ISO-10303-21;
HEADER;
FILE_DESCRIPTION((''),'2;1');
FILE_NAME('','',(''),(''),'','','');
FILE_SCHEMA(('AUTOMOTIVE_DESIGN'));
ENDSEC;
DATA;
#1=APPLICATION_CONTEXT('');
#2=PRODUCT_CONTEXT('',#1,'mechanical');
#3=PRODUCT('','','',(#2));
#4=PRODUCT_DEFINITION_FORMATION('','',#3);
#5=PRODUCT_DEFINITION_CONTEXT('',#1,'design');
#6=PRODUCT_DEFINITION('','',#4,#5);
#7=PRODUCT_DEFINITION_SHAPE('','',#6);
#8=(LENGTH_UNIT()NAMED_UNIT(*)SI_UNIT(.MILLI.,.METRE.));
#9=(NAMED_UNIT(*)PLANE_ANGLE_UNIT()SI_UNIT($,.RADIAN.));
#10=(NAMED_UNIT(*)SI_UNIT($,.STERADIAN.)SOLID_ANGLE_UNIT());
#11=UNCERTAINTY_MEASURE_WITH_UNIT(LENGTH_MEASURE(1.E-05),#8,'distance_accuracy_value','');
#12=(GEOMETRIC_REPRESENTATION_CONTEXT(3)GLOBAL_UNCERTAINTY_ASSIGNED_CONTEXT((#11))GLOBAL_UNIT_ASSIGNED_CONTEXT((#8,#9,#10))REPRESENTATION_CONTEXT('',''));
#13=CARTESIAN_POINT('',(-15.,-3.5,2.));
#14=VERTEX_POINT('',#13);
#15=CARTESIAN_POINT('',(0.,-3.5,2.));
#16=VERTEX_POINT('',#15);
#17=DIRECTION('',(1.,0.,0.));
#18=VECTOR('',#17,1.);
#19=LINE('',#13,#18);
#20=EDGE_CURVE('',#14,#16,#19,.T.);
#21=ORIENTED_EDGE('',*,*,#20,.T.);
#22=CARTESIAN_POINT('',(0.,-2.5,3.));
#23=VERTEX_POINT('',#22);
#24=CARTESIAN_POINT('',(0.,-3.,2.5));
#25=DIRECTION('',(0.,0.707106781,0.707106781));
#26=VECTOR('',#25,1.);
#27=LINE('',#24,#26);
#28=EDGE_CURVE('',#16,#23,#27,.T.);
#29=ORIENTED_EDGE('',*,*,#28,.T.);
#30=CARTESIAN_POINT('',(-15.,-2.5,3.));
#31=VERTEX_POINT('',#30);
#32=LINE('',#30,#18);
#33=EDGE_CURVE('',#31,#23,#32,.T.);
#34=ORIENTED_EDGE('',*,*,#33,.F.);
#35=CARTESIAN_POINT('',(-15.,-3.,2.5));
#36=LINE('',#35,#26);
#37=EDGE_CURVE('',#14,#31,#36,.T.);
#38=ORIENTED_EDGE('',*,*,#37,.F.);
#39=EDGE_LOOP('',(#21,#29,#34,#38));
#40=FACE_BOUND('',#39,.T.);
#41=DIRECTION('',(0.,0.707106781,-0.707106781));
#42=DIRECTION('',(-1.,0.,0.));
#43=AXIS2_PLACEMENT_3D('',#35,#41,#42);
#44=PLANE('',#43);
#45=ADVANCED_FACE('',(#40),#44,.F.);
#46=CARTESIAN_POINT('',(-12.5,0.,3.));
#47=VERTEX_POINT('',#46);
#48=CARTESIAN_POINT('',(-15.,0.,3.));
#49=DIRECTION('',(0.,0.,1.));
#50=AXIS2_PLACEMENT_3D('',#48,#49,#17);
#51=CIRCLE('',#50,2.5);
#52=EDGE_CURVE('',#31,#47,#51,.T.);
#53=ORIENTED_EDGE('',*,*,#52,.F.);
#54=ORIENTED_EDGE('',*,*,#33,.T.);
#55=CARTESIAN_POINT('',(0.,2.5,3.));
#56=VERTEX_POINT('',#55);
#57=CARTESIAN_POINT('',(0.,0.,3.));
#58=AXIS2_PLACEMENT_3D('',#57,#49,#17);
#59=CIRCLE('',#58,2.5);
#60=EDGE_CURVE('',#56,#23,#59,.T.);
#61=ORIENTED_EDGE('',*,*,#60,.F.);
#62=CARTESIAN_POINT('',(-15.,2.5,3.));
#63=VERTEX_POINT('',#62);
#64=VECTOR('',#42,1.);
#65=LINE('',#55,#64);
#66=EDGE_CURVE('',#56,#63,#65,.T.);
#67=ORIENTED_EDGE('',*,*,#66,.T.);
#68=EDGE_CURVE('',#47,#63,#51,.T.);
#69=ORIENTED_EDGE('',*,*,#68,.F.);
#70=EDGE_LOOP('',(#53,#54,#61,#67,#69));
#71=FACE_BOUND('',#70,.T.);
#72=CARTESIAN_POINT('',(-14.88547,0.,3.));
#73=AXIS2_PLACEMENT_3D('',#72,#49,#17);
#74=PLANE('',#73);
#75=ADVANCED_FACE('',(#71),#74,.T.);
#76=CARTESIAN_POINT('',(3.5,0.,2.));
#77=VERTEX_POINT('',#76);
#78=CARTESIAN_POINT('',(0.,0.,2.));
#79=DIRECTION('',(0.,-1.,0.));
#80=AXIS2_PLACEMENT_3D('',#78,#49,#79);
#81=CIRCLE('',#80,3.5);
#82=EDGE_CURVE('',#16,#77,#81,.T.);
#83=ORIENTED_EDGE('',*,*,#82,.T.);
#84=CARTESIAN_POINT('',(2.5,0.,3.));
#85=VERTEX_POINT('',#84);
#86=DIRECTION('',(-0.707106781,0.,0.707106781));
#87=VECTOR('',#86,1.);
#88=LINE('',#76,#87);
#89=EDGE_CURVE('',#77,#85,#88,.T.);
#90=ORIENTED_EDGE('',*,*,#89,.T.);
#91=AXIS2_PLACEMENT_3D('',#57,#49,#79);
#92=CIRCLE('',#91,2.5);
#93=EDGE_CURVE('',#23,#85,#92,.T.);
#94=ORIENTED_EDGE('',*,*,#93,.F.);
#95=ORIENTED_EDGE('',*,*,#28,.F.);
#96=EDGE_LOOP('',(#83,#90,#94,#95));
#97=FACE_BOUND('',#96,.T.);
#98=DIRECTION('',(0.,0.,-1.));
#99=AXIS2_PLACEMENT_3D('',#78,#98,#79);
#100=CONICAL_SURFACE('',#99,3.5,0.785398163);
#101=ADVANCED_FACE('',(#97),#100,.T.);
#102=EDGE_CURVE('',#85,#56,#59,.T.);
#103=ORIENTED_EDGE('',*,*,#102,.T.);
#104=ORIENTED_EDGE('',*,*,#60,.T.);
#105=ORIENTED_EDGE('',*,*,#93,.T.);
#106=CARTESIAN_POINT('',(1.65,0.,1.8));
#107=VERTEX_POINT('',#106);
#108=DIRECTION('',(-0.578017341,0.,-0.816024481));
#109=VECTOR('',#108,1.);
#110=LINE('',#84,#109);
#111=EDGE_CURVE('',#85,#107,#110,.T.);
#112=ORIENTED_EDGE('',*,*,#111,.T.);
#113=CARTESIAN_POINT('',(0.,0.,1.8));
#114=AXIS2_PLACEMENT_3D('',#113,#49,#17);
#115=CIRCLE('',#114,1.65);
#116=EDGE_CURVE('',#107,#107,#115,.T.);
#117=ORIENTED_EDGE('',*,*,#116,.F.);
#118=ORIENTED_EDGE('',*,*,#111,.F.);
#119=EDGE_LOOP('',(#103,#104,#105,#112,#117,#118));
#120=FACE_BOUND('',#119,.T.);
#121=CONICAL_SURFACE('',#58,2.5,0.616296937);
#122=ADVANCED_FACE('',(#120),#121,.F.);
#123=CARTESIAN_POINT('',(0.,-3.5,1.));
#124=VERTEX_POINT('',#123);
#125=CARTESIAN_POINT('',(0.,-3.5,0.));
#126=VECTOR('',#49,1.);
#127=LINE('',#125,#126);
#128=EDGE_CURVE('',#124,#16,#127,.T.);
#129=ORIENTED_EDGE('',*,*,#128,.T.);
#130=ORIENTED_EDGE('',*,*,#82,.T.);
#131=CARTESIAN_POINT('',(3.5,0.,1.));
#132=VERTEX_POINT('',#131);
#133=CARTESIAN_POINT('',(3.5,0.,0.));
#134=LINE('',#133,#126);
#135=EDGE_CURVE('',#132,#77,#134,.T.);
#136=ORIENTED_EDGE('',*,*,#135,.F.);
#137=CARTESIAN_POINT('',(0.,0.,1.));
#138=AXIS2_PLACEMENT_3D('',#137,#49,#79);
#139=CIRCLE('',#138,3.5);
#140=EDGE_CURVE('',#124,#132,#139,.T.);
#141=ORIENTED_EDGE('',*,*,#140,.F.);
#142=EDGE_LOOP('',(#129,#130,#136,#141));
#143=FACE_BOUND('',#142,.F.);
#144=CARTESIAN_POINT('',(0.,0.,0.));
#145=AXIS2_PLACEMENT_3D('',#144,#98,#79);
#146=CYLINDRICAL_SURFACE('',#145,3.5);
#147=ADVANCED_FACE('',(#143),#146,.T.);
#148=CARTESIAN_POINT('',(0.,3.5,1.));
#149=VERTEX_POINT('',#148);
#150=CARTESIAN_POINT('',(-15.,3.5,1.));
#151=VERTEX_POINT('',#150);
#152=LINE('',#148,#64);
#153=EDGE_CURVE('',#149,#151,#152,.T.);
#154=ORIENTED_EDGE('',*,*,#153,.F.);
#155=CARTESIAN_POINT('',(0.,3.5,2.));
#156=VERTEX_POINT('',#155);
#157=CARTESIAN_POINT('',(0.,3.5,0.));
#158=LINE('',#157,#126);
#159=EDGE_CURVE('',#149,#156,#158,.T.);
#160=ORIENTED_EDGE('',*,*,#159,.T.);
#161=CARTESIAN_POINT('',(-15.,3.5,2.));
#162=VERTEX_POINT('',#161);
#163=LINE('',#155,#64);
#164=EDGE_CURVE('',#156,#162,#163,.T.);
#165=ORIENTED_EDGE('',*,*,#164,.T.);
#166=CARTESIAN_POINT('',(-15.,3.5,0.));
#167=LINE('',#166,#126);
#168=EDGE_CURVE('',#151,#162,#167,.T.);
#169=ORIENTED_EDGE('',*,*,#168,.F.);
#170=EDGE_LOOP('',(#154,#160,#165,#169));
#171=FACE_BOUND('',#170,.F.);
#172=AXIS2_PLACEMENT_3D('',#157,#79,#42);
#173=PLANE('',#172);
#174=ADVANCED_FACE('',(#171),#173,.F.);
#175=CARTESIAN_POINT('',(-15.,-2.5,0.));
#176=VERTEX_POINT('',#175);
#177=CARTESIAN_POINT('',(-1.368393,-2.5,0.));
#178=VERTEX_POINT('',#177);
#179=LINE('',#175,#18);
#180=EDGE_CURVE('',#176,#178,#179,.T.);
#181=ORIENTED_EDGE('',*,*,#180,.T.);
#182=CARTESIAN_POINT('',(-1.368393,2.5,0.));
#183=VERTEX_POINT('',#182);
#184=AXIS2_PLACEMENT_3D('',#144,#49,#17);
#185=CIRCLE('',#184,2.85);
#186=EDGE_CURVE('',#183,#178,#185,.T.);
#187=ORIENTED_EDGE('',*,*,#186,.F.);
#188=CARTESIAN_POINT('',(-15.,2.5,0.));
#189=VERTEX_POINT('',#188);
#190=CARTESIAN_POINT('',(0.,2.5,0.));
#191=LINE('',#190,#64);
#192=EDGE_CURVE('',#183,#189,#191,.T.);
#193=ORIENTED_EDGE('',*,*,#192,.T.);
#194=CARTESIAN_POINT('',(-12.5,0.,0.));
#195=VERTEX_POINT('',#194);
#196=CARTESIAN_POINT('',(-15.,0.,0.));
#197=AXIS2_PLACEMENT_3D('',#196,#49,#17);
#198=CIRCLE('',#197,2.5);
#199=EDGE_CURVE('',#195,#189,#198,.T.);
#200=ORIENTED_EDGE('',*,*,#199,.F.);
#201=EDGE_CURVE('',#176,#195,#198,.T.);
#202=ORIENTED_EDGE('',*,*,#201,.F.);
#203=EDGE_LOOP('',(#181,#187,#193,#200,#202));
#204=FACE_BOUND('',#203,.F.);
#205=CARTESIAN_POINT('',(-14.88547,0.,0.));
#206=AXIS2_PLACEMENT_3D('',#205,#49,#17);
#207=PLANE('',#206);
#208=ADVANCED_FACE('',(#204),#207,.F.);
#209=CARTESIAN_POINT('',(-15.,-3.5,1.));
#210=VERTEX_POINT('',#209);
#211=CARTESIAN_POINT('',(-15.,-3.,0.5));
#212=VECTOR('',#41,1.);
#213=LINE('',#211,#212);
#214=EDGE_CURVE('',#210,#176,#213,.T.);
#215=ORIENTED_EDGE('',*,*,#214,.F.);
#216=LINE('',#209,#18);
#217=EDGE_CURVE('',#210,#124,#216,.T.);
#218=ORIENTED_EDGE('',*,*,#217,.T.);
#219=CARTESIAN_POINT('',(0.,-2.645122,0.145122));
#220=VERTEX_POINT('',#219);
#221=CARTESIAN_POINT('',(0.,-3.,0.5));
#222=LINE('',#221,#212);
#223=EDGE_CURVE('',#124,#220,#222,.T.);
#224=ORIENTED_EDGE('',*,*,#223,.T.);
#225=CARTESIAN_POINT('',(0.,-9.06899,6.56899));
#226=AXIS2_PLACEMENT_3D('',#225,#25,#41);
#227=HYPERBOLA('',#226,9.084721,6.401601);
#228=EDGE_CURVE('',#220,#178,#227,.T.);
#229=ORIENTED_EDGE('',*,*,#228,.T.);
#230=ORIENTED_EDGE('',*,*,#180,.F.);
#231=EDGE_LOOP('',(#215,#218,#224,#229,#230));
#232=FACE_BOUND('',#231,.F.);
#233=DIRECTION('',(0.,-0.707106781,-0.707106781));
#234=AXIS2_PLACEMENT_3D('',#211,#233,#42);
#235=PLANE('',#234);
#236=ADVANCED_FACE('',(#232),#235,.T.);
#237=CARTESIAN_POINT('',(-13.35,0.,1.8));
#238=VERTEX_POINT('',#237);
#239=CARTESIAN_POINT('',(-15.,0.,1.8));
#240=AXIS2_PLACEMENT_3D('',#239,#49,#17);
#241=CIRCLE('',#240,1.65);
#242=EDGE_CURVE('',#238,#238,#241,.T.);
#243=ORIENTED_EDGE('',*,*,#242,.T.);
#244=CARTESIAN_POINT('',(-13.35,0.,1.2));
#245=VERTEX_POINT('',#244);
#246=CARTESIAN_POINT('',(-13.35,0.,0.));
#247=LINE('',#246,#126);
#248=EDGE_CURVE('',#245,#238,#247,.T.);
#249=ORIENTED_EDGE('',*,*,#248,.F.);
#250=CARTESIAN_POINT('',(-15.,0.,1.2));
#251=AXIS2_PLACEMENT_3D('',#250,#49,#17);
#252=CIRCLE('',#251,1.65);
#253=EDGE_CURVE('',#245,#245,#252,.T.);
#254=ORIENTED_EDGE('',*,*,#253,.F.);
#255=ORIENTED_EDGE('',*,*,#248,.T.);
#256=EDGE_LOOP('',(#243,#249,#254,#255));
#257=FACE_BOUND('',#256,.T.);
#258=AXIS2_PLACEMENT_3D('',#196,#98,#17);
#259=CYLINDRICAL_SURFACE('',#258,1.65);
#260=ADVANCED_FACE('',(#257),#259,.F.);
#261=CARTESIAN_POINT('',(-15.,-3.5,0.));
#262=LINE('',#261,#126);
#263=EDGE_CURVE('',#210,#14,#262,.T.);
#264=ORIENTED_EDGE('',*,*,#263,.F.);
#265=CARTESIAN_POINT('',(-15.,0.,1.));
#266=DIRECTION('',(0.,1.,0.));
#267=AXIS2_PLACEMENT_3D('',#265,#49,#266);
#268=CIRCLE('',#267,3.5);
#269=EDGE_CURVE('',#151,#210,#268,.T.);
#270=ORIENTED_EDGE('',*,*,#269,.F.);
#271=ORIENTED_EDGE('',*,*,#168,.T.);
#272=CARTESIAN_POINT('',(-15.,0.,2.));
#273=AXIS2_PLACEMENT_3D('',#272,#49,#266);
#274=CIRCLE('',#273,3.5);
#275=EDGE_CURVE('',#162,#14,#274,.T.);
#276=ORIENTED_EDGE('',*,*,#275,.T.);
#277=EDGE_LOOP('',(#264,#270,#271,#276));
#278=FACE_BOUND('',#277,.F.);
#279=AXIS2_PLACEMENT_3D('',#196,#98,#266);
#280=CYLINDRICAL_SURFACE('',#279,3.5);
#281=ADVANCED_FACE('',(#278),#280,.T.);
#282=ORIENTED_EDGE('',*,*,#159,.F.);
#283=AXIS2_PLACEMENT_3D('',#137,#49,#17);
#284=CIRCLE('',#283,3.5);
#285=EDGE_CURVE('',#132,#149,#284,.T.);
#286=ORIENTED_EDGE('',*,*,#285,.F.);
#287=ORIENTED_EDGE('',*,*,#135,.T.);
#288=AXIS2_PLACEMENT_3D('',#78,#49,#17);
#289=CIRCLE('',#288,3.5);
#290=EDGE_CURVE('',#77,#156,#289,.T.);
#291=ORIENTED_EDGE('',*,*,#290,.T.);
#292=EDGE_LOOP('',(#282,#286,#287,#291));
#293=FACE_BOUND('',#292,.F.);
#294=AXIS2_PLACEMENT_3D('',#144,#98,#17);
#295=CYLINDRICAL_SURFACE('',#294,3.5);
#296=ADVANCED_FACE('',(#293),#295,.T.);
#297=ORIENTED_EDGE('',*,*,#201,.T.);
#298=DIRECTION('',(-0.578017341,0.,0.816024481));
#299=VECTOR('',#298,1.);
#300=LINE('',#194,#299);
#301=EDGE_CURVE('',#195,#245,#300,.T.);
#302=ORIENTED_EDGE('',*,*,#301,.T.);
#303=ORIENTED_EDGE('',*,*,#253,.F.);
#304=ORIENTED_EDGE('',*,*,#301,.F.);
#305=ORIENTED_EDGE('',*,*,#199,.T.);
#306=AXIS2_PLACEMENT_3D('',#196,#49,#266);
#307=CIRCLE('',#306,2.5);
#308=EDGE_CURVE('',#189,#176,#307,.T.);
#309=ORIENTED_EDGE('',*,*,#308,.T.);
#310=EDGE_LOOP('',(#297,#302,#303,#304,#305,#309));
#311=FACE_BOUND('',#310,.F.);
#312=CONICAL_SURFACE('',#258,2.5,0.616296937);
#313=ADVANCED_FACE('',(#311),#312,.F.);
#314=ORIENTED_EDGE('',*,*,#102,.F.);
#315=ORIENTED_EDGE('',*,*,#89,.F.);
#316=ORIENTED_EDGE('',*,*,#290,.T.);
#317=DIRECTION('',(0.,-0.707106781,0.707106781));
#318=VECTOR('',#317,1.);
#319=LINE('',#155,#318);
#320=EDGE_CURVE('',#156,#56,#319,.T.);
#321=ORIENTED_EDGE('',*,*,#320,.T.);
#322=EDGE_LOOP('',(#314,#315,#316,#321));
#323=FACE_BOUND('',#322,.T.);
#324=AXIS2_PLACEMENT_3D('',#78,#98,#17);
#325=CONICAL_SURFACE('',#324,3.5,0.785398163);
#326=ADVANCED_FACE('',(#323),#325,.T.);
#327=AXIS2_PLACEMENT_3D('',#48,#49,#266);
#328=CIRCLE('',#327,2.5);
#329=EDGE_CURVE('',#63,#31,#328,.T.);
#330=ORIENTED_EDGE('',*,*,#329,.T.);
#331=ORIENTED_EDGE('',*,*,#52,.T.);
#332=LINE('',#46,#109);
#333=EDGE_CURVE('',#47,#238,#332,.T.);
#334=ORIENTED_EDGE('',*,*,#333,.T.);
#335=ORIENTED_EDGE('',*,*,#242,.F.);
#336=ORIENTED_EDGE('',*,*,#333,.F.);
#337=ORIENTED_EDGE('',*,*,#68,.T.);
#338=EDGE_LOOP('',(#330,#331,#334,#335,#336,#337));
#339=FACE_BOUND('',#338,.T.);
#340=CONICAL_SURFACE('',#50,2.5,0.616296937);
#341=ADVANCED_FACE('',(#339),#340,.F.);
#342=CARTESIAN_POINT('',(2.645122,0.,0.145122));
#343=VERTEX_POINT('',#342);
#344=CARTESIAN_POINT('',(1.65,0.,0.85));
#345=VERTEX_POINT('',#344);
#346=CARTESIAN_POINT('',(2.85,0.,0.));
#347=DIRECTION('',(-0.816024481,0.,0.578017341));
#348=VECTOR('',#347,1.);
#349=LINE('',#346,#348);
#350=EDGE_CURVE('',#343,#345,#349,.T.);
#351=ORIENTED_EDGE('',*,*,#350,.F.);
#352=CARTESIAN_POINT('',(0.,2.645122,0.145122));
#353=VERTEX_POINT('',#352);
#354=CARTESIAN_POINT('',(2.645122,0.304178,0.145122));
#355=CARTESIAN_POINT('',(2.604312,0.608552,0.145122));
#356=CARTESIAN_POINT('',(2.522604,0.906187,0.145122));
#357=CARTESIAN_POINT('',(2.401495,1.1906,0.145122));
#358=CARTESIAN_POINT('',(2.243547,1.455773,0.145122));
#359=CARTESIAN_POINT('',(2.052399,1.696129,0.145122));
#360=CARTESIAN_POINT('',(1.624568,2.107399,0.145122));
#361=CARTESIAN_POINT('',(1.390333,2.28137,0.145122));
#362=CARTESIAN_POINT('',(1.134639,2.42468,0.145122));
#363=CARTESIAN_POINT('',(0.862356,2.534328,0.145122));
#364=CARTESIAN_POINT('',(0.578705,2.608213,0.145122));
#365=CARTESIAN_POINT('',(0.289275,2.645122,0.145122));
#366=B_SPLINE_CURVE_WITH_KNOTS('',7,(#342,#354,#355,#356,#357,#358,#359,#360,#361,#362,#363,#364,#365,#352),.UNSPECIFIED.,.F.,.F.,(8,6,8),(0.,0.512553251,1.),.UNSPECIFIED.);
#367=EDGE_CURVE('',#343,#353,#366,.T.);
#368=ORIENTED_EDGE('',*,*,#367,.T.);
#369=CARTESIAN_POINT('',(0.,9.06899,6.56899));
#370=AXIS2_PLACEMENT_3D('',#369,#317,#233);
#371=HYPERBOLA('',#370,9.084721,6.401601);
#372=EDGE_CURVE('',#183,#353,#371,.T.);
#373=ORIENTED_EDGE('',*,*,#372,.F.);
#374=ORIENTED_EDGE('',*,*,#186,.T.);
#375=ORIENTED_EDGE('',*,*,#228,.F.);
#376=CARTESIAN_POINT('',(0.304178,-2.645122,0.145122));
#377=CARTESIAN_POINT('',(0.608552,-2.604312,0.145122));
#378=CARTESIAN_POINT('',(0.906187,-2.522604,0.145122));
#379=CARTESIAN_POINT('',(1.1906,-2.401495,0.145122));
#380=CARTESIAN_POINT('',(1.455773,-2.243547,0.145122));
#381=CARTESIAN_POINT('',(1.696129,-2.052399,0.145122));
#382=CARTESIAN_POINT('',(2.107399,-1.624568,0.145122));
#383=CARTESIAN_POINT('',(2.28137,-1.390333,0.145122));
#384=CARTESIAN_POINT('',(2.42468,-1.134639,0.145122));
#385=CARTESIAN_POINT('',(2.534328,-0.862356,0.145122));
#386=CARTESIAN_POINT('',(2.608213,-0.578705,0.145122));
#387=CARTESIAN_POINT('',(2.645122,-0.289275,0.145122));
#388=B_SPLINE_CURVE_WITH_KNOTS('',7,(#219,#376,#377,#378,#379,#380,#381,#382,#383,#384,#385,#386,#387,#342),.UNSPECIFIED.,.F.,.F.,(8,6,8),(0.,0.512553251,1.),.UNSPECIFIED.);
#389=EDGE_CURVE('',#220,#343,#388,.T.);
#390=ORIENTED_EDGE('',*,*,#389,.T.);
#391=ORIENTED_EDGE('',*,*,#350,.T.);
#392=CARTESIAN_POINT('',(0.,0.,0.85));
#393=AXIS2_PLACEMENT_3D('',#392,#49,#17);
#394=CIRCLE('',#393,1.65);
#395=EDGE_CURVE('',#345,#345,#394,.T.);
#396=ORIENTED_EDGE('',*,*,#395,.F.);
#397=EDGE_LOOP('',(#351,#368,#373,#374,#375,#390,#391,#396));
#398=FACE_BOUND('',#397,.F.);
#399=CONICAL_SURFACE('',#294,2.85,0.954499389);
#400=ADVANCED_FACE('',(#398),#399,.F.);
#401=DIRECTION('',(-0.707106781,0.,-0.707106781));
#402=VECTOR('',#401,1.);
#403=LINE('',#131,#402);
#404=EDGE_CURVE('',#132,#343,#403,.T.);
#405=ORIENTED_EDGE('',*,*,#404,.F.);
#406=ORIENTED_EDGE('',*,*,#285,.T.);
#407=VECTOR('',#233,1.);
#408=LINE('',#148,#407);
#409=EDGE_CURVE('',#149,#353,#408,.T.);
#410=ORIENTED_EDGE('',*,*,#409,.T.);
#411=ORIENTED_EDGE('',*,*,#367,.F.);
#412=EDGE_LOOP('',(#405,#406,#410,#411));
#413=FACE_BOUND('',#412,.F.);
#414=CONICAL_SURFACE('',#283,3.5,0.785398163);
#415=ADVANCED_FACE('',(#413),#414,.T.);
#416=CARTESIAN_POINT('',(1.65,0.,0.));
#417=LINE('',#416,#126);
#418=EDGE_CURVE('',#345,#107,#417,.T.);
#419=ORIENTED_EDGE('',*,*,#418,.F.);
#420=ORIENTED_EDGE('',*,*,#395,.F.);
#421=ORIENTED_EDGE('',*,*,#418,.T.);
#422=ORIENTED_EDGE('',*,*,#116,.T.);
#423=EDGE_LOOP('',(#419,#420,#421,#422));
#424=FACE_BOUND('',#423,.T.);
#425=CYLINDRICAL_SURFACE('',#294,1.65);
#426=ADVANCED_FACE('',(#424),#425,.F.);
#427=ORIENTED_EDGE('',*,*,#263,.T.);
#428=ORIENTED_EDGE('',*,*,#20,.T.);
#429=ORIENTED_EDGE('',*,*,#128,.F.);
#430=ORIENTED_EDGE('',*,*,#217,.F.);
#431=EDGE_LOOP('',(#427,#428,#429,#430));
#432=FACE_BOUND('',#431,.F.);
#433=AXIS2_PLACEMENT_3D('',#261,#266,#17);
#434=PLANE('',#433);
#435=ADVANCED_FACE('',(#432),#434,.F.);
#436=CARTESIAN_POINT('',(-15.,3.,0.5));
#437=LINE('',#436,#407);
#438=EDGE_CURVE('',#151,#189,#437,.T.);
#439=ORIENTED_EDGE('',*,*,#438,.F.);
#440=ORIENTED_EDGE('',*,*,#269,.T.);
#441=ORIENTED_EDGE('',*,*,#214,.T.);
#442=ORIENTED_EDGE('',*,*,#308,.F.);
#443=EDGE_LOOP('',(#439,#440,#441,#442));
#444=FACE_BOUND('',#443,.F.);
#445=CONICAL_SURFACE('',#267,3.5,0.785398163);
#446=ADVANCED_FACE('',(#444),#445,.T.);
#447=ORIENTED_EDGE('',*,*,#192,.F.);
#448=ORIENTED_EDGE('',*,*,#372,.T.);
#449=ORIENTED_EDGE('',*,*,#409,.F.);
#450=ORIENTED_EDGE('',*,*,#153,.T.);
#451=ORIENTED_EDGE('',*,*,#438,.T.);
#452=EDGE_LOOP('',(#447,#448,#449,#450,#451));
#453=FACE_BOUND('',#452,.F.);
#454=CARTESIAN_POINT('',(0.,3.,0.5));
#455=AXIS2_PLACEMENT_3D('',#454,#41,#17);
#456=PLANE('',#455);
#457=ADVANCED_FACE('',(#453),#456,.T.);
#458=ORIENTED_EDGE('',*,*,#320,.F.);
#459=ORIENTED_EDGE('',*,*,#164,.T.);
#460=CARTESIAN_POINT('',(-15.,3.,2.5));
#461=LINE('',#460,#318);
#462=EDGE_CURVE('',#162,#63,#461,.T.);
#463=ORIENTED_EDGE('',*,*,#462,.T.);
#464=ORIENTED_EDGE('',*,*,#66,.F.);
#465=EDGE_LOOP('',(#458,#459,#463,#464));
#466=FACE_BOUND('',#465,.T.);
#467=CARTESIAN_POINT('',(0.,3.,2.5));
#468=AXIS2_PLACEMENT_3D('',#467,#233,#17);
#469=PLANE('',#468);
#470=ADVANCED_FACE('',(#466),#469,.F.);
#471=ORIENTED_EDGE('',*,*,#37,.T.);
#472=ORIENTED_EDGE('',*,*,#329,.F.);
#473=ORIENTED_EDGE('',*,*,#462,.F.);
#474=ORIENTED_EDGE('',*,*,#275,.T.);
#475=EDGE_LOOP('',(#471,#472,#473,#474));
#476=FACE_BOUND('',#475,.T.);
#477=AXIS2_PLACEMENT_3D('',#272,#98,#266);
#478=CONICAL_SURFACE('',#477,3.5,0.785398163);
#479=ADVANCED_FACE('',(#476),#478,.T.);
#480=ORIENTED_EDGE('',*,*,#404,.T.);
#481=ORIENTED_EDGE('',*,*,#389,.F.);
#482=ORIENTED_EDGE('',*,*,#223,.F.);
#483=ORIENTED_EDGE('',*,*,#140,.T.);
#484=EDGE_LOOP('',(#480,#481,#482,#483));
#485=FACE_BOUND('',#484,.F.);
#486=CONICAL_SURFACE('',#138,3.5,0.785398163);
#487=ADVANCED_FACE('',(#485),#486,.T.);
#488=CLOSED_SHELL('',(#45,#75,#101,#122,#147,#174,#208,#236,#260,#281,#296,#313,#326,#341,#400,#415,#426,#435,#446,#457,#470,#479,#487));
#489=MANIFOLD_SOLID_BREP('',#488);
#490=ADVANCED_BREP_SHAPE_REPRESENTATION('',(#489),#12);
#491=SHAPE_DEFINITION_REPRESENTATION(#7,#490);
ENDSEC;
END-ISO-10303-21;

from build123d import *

# Parameters (mm, degrees)
F0_R     = 1.65
F1_DEPTH = 3
F2_SIZE  = 1


# Not quite as in the source:
# - a fillet or chamfer that OpenCascade refuses, or shapes differently, is made with other operations: its cross-section is extruded or revolved along the edge and cut away or added


with BuildPart() as f1:
    # F0 (on Top) → F1 (new body)
    with BuildSketch(Plane.XY):
        with BuildLine():
            ThreePointArc((-15, -3.5), (-12.5251262658, -2.4748737342), (-11.5, 0))
            ThreePointArc((-11.5, 0), (-12.5251262658, 2.4748737342), (-15, 3.5))
            ThreePointArc((-15, 3.5), (-18.5, 0), (-15, -3.5))
        make_face()
        with Locations((-15, 0)):
            Circle(F0_R, mode=Mode.SUBTRACT)
        with BuildLine():
            ThreePointArc((-15, 3.5), (-12.5251262658, 2.4748737342), (-11.5, 0))
            ThreePointArc((-11.5, 0), (-12.5251262658, -2.4748737342), (-15, -3.5))
            Line((-15, -3.5), (0, -3.5))
            ThreePointArc((0, -3.5), (-3.5, 0), (0, 3.5))
            Line((0, 3.5), (-15, 3.5))
        make_face()
        with BuildLine():
            ThreePointArc((3.5, 0), (2.4748737342, 2.4748737342), (0, 3.5))
            ThreePointArc((0, 3.5), (-3.5, 0), (0, -3.5))
            ThreePointArc((0, -3.5), (2.4748737342, -2.4748737342), (3.5, 0))
        make_face()
        Circle(F0_R, mode=Mode.SUBTRACT)
    extrude(amount=F1_DEPTH)

    # F2
    f2_edges = [f1.edges().sort_by_distance(p)[0] for p in [
        (-7.5, -3.5, 3),
        (-18.5, 0, 3),
        (3.5, 0, 3),
        (-7.5, 3.5, 3),
        (-7.5, -3.5, 0),
        (-18.5, 0, 0),
        (3.5, 0, 0),
        (-7.5, 3.5, 0),
    ]]
    chamfer(f2_edges, length=F2_SIZE)

    # F3: chamfer of 1.2 x 0.85 on 4 edges, made by hand

    # F3_s1 → F3_t2 (revolve, cut)
    with BuildSketch(Plane.XZ):
        Polygon((-12.5, 3), (-13.35, 1.8), (-13.35, 3), align=None)
    revolve(axis=Axis((-15, 0, 3), (0, 0, 1)), mode=Mode.SUBTRACT)

    # F3_s3 → F3_t4 (revolve, cut)
    with BuildSketch(Plane.XZ):
        Polygon((2.5, 3), (1.65, 1.8), (1.65, 3), align=None)
    revolve(axis=Axis((0, 0, 3), (0, 0, 1)), mode=Mode.SUBTRACT)

    # F3_s5 → F3_t6 (revolve, cut)
    with BuildSketch(Plane.XZ):
        Polygon((2.85, 0), (1.65, 0.85), (1.65, 0), align=None)
    revolve(axis=Axis((0, 0, 0), (0, 0, 1)), mode=Mode.SUBTRACT)

    # F3_s7 → F3_t8 (revolve, cut)
    with BuildSketch(Plane.XZ):
        Polygon((-12.5, 0), (-13.35, 1.2), (-13.35, 0), align=None)
    revolve(axis=Axis((-15, 0, 0), (0, 0, 1)), mode=Mode.SUBTRACT)


solid = f1.part
